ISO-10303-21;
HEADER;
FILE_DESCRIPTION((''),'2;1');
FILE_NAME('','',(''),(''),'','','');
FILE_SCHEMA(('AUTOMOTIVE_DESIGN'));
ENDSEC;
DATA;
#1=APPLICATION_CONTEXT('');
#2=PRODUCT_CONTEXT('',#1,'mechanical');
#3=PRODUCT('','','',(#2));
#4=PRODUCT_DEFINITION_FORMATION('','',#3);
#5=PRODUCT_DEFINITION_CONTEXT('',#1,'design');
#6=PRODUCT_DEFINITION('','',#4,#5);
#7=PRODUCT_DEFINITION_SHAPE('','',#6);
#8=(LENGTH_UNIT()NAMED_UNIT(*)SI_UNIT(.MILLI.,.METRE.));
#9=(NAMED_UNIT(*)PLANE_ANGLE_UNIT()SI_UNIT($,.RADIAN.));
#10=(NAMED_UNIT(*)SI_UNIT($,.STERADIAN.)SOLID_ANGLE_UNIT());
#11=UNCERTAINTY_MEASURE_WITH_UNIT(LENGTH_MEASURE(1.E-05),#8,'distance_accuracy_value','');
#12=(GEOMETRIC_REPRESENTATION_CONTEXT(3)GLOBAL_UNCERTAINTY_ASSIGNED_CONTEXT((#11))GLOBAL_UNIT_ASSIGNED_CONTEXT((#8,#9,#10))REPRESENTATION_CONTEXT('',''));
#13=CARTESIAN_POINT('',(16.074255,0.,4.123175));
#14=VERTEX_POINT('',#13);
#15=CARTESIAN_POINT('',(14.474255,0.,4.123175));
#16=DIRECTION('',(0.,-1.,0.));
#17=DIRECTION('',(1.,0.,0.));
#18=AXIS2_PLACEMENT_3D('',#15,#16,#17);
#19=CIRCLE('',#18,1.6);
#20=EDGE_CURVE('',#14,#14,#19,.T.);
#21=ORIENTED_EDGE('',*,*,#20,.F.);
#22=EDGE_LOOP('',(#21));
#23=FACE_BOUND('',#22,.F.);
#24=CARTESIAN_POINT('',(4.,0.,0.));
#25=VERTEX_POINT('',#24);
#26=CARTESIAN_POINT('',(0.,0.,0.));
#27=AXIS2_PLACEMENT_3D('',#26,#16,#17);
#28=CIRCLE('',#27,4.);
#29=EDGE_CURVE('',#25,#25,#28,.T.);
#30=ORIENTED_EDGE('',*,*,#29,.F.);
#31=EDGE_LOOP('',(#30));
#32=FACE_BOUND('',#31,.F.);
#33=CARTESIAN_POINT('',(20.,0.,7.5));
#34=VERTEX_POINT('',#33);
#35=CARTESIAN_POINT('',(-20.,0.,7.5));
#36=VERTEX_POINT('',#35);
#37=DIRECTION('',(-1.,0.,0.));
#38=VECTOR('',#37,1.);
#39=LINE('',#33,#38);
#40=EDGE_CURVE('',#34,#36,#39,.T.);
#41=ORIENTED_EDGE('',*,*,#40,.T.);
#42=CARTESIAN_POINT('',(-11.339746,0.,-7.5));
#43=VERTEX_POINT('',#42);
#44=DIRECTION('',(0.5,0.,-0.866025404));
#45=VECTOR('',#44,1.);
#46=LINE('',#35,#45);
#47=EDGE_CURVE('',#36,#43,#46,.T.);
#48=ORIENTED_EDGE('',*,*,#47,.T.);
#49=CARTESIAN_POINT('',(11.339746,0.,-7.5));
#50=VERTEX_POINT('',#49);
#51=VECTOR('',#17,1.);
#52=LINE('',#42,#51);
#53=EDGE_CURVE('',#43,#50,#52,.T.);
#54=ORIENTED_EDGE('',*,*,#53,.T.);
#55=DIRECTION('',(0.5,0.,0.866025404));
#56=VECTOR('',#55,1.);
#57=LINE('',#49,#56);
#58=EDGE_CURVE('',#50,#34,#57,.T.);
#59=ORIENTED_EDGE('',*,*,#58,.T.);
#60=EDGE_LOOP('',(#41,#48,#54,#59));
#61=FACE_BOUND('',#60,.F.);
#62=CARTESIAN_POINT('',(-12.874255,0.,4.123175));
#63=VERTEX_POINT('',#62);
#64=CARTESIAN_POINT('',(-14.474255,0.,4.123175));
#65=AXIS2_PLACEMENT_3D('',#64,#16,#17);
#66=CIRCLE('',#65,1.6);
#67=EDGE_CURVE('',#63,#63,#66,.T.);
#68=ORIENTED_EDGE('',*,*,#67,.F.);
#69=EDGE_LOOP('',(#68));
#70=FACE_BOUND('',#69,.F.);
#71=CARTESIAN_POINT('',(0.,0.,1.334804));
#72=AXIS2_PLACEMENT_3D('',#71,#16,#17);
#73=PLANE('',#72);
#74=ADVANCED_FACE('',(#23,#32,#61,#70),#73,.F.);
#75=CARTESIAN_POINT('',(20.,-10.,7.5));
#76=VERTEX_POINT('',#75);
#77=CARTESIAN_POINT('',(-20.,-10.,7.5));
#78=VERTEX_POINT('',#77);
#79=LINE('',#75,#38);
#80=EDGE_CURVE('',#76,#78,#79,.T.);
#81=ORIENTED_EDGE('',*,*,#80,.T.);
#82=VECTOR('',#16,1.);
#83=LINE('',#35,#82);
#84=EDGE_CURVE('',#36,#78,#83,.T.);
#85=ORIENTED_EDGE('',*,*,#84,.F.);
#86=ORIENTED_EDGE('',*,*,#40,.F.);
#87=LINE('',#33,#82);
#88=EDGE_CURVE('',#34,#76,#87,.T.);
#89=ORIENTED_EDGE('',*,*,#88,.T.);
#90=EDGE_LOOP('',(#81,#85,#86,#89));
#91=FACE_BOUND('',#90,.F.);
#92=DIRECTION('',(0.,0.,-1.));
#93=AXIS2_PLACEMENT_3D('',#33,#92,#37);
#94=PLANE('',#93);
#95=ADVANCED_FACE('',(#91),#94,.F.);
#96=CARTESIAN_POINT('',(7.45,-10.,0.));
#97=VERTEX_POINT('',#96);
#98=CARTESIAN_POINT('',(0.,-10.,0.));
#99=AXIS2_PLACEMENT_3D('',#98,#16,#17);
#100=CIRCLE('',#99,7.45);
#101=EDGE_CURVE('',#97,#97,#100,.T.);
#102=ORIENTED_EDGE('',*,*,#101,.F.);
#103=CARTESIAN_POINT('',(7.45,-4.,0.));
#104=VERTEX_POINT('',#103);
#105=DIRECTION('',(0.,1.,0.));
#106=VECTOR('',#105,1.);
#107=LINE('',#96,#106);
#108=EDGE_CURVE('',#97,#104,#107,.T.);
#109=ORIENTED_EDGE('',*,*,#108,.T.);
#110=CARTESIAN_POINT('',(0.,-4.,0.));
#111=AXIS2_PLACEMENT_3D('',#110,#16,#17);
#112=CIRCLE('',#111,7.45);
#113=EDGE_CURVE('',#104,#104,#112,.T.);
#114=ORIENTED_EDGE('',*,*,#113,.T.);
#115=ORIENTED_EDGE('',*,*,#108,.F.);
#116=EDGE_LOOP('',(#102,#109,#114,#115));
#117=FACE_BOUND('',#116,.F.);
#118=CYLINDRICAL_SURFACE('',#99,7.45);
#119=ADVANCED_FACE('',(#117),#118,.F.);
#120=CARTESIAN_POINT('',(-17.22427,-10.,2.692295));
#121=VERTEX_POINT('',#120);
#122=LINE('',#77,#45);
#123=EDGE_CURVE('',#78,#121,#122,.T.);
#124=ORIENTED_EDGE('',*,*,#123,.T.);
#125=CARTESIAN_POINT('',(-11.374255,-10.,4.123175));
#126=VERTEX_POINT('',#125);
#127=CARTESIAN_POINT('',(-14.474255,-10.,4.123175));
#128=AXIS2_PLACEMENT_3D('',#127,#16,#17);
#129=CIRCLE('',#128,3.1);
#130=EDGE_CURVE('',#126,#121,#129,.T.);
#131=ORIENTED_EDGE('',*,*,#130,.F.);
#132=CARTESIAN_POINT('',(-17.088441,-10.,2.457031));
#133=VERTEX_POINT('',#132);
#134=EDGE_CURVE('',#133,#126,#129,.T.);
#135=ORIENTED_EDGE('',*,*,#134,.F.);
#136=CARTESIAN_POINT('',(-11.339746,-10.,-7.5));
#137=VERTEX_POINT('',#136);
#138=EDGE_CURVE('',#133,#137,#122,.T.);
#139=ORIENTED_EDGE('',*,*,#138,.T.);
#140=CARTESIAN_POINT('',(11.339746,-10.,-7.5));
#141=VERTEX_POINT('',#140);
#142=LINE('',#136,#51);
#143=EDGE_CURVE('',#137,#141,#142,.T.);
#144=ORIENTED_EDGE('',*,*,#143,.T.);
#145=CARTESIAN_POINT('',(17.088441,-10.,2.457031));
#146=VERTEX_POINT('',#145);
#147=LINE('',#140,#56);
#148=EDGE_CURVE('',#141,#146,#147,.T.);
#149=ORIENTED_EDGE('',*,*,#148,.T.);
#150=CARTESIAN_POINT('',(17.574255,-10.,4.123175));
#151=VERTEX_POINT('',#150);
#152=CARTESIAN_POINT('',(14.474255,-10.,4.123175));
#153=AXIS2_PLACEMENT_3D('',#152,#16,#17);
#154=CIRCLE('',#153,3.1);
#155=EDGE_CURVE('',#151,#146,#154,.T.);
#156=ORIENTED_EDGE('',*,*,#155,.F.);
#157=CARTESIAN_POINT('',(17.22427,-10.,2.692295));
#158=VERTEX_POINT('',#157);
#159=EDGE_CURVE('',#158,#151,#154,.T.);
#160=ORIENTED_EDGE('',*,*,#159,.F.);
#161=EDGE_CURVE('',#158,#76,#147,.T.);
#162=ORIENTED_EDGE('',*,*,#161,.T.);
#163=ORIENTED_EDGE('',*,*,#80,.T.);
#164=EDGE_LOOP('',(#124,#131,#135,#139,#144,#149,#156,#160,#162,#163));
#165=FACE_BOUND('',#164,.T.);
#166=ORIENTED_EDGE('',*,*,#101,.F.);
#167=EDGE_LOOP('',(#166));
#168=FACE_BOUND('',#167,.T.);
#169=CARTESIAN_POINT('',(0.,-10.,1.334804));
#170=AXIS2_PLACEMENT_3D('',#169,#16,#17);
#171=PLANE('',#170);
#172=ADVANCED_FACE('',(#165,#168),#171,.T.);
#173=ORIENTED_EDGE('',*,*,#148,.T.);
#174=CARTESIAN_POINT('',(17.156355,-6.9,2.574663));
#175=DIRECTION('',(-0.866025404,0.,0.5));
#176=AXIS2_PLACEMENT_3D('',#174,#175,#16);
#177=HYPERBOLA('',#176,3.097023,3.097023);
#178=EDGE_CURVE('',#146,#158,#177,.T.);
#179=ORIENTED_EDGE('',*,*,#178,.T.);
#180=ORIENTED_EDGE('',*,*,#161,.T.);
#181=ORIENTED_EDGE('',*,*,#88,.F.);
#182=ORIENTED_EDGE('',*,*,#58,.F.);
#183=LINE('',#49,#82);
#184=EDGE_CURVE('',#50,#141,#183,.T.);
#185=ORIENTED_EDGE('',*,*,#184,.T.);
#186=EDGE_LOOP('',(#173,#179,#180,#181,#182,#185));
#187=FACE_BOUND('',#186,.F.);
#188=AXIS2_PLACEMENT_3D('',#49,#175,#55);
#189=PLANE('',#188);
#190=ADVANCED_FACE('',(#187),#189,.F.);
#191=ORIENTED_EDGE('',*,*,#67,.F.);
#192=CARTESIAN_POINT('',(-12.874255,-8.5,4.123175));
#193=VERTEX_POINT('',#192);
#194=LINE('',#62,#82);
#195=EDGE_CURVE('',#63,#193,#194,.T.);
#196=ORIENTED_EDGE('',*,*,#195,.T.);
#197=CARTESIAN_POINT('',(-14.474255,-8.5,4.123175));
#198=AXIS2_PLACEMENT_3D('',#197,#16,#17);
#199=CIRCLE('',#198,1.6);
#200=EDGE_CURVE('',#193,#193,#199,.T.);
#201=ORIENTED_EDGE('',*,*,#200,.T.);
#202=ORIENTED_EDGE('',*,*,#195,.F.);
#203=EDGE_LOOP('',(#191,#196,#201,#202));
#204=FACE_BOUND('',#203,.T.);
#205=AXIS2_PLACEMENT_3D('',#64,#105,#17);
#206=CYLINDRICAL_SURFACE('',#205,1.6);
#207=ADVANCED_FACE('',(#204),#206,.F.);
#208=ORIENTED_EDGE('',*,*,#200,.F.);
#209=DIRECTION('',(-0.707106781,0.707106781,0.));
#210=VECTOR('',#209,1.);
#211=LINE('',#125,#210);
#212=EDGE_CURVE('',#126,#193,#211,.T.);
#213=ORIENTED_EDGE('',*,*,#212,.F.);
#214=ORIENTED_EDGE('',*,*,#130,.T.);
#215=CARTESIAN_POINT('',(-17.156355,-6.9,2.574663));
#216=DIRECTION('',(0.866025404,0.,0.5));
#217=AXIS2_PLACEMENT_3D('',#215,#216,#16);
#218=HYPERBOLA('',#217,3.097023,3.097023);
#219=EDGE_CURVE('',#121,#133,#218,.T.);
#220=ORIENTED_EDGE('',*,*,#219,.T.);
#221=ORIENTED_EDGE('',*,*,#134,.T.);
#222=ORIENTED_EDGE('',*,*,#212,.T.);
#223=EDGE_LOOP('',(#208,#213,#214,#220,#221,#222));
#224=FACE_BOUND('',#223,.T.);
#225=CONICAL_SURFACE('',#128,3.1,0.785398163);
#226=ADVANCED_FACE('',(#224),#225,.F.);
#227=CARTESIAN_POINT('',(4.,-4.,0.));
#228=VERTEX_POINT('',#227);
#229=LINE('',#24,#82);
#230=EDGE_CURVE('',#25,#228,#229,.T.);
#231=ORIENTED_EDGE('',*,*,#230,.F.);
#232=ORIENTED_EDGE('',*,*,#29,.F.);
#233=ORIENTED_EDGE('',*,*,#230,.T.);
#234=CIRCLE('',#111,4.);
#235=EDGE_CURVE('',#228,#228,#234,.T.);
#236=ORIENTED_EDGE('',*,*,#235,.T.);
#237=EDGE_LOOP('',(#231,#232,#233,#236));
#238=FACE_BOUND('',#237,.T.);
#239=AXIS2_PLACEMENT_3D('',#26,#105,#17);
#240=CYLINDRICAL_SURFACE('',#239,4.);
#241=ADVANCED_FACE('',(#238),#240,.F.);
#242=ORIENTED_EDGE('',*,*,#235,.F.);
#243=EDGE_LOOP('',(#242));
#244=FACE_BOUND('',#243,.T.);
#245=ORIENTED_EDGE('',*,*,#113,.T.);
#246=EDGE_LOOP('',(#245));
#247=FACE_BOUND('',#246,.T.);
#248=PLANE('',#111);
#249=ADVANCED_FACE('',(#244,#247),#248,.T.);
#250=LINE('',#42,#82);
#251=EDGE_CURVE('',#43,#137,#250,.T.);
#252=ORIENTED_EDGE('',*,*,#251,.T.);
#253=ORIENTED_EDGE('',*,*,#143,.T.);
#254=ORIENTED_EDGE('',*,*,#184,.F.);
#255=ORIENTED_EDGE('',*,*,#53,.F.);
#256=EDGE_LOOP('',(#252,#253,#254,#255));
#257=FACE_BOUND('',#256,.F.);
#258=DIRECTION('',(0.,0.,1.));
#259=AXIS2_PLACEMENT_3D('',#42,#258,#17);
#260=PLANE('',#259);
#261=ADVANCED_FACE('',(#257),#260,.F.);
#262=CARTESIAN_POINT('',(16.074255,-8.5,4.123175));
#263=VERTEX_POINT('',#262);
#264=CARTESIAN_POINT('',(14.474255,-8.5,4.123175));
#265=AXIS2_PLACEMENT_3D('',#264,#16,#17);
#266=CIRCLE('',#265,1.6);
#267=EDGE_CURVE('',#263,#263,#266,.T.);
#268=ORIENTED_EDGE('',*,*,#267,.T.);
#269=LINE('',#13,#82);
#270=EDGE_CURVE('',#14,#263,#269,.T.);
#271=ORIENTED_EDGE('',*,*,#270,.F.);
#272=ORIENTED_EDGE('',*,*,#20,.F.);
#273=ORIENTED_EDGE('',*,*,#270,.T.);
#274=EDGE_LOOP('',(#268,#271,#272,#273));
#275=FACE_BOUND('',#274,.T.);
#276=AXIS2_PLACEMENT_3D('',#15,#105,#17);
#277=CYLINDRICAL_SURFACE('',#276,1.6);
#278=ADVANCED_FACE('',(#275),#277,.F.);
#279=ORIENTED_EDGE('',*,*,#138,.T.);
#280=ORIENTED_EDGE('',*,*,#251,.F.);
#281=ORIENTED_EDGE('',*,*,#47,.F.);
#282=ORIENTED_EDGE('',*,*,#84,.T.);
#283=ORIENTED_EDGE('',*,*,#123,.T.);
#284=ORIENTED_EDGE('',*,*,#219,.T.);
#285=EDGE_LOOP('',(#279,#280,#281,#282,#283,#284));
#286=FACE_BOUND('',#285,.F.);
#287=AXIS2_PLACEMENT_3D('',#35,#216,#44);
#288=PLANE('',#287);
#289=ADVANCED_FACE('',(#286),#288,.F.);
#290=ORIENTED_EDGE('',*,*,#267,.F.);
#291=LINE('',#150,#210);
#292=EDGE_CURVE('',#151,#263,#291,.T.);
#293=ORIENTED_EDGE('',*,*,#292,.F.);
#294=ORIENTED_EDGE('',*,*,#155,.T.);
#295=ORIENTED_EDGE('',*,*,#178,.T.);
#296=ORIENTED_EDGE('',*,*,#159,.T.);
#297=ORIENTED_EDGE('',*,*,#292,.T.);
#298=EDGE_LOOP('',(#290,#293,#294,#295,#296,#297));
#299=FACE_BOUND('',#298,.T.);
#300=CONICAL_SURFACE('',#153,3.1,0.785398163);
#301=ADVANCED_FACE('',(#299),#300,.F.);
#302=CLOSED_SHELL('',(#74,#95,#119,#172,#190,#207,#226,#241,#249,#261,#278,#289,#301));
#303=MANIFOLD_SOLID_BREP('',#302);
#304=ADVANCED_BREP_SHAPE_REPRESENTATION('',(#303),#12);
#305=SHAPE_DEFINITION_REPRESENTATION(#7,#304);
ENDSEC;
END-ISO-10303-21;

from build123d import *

# Parameters (mm, degrees)
F0_R     = 1.6
F0_R_2   = 4
F1_DEPTH = 10
F2_R     = 7.45
F2_R_2   = 4
F3_DEPTH = 6


# Not quite as in the source:
# - a fillet or chamfer that OpenCascade refuses, or shapes differently, is made with other operations: its cross-section is extruded or revolved along the edge and cut away or added


with BuildPart() as f1:
    # F0 (on Front) → F1 (new body)
    with BuildSketch(Plane.XZ):
        Polygon((20, 7.5), (-20, 7.5), (-11.3397459622, -7.5), (11.3397459622, -7.5), align=None)
        with Locations((-14.4742550328, 4.1231745854)):
            Circle(F0_R, mode=Mode.SUBTRACT)
        Circle(F0_R_2, mode=Mode.SUBTRACT)
        with Locations((14.4742550328, 4.1231745854)):
            Circle(F0_R, mode=Mode.SUBTRACT)
    extrude(amount=F1_DEPTH)

    # F2 (on face) → F3 (cut)
    with BuildSketch(Plane.XZ.offset(10)):
        Circle(F2_R)
        Circle(F2_R_2, mode=Mode.SUBTRACT)
    extrude(amount=-F3_DEPTH, mode=Mode.SUBTRACT)

    # F4: chamfer of 1.5 on 2 edges, made by hand

    # F4_s1 → F4_t2 (revolve, cut)
    with BuildSketch(Plane.XY.offset(4.1231745854)):
        Polygon((-11.3742550328, -10), (-12.8742550328, -8.5), (-12.8742550328, -10), align=None)
    revolve(axis=Axis((-14.4742550328, -10, 4.1231745854), (0, -1, 0)), mode=Mode.SUBTRACT)

    # F4_s3 → F4_t4 (revolve, cut)
    with BuildSketch(Plane.XY.offset(4.1231745854)):
        Polygon((17.5742550328, -10), (16.0742550328, -8.5), (16.0742550328, -10), align=None)
    revolve(axis=Axis((14.4742550328, -10, 4.1231745854), (0, -1, 0)), mode=Mode.SUBTRACT)


solid = f1.part
